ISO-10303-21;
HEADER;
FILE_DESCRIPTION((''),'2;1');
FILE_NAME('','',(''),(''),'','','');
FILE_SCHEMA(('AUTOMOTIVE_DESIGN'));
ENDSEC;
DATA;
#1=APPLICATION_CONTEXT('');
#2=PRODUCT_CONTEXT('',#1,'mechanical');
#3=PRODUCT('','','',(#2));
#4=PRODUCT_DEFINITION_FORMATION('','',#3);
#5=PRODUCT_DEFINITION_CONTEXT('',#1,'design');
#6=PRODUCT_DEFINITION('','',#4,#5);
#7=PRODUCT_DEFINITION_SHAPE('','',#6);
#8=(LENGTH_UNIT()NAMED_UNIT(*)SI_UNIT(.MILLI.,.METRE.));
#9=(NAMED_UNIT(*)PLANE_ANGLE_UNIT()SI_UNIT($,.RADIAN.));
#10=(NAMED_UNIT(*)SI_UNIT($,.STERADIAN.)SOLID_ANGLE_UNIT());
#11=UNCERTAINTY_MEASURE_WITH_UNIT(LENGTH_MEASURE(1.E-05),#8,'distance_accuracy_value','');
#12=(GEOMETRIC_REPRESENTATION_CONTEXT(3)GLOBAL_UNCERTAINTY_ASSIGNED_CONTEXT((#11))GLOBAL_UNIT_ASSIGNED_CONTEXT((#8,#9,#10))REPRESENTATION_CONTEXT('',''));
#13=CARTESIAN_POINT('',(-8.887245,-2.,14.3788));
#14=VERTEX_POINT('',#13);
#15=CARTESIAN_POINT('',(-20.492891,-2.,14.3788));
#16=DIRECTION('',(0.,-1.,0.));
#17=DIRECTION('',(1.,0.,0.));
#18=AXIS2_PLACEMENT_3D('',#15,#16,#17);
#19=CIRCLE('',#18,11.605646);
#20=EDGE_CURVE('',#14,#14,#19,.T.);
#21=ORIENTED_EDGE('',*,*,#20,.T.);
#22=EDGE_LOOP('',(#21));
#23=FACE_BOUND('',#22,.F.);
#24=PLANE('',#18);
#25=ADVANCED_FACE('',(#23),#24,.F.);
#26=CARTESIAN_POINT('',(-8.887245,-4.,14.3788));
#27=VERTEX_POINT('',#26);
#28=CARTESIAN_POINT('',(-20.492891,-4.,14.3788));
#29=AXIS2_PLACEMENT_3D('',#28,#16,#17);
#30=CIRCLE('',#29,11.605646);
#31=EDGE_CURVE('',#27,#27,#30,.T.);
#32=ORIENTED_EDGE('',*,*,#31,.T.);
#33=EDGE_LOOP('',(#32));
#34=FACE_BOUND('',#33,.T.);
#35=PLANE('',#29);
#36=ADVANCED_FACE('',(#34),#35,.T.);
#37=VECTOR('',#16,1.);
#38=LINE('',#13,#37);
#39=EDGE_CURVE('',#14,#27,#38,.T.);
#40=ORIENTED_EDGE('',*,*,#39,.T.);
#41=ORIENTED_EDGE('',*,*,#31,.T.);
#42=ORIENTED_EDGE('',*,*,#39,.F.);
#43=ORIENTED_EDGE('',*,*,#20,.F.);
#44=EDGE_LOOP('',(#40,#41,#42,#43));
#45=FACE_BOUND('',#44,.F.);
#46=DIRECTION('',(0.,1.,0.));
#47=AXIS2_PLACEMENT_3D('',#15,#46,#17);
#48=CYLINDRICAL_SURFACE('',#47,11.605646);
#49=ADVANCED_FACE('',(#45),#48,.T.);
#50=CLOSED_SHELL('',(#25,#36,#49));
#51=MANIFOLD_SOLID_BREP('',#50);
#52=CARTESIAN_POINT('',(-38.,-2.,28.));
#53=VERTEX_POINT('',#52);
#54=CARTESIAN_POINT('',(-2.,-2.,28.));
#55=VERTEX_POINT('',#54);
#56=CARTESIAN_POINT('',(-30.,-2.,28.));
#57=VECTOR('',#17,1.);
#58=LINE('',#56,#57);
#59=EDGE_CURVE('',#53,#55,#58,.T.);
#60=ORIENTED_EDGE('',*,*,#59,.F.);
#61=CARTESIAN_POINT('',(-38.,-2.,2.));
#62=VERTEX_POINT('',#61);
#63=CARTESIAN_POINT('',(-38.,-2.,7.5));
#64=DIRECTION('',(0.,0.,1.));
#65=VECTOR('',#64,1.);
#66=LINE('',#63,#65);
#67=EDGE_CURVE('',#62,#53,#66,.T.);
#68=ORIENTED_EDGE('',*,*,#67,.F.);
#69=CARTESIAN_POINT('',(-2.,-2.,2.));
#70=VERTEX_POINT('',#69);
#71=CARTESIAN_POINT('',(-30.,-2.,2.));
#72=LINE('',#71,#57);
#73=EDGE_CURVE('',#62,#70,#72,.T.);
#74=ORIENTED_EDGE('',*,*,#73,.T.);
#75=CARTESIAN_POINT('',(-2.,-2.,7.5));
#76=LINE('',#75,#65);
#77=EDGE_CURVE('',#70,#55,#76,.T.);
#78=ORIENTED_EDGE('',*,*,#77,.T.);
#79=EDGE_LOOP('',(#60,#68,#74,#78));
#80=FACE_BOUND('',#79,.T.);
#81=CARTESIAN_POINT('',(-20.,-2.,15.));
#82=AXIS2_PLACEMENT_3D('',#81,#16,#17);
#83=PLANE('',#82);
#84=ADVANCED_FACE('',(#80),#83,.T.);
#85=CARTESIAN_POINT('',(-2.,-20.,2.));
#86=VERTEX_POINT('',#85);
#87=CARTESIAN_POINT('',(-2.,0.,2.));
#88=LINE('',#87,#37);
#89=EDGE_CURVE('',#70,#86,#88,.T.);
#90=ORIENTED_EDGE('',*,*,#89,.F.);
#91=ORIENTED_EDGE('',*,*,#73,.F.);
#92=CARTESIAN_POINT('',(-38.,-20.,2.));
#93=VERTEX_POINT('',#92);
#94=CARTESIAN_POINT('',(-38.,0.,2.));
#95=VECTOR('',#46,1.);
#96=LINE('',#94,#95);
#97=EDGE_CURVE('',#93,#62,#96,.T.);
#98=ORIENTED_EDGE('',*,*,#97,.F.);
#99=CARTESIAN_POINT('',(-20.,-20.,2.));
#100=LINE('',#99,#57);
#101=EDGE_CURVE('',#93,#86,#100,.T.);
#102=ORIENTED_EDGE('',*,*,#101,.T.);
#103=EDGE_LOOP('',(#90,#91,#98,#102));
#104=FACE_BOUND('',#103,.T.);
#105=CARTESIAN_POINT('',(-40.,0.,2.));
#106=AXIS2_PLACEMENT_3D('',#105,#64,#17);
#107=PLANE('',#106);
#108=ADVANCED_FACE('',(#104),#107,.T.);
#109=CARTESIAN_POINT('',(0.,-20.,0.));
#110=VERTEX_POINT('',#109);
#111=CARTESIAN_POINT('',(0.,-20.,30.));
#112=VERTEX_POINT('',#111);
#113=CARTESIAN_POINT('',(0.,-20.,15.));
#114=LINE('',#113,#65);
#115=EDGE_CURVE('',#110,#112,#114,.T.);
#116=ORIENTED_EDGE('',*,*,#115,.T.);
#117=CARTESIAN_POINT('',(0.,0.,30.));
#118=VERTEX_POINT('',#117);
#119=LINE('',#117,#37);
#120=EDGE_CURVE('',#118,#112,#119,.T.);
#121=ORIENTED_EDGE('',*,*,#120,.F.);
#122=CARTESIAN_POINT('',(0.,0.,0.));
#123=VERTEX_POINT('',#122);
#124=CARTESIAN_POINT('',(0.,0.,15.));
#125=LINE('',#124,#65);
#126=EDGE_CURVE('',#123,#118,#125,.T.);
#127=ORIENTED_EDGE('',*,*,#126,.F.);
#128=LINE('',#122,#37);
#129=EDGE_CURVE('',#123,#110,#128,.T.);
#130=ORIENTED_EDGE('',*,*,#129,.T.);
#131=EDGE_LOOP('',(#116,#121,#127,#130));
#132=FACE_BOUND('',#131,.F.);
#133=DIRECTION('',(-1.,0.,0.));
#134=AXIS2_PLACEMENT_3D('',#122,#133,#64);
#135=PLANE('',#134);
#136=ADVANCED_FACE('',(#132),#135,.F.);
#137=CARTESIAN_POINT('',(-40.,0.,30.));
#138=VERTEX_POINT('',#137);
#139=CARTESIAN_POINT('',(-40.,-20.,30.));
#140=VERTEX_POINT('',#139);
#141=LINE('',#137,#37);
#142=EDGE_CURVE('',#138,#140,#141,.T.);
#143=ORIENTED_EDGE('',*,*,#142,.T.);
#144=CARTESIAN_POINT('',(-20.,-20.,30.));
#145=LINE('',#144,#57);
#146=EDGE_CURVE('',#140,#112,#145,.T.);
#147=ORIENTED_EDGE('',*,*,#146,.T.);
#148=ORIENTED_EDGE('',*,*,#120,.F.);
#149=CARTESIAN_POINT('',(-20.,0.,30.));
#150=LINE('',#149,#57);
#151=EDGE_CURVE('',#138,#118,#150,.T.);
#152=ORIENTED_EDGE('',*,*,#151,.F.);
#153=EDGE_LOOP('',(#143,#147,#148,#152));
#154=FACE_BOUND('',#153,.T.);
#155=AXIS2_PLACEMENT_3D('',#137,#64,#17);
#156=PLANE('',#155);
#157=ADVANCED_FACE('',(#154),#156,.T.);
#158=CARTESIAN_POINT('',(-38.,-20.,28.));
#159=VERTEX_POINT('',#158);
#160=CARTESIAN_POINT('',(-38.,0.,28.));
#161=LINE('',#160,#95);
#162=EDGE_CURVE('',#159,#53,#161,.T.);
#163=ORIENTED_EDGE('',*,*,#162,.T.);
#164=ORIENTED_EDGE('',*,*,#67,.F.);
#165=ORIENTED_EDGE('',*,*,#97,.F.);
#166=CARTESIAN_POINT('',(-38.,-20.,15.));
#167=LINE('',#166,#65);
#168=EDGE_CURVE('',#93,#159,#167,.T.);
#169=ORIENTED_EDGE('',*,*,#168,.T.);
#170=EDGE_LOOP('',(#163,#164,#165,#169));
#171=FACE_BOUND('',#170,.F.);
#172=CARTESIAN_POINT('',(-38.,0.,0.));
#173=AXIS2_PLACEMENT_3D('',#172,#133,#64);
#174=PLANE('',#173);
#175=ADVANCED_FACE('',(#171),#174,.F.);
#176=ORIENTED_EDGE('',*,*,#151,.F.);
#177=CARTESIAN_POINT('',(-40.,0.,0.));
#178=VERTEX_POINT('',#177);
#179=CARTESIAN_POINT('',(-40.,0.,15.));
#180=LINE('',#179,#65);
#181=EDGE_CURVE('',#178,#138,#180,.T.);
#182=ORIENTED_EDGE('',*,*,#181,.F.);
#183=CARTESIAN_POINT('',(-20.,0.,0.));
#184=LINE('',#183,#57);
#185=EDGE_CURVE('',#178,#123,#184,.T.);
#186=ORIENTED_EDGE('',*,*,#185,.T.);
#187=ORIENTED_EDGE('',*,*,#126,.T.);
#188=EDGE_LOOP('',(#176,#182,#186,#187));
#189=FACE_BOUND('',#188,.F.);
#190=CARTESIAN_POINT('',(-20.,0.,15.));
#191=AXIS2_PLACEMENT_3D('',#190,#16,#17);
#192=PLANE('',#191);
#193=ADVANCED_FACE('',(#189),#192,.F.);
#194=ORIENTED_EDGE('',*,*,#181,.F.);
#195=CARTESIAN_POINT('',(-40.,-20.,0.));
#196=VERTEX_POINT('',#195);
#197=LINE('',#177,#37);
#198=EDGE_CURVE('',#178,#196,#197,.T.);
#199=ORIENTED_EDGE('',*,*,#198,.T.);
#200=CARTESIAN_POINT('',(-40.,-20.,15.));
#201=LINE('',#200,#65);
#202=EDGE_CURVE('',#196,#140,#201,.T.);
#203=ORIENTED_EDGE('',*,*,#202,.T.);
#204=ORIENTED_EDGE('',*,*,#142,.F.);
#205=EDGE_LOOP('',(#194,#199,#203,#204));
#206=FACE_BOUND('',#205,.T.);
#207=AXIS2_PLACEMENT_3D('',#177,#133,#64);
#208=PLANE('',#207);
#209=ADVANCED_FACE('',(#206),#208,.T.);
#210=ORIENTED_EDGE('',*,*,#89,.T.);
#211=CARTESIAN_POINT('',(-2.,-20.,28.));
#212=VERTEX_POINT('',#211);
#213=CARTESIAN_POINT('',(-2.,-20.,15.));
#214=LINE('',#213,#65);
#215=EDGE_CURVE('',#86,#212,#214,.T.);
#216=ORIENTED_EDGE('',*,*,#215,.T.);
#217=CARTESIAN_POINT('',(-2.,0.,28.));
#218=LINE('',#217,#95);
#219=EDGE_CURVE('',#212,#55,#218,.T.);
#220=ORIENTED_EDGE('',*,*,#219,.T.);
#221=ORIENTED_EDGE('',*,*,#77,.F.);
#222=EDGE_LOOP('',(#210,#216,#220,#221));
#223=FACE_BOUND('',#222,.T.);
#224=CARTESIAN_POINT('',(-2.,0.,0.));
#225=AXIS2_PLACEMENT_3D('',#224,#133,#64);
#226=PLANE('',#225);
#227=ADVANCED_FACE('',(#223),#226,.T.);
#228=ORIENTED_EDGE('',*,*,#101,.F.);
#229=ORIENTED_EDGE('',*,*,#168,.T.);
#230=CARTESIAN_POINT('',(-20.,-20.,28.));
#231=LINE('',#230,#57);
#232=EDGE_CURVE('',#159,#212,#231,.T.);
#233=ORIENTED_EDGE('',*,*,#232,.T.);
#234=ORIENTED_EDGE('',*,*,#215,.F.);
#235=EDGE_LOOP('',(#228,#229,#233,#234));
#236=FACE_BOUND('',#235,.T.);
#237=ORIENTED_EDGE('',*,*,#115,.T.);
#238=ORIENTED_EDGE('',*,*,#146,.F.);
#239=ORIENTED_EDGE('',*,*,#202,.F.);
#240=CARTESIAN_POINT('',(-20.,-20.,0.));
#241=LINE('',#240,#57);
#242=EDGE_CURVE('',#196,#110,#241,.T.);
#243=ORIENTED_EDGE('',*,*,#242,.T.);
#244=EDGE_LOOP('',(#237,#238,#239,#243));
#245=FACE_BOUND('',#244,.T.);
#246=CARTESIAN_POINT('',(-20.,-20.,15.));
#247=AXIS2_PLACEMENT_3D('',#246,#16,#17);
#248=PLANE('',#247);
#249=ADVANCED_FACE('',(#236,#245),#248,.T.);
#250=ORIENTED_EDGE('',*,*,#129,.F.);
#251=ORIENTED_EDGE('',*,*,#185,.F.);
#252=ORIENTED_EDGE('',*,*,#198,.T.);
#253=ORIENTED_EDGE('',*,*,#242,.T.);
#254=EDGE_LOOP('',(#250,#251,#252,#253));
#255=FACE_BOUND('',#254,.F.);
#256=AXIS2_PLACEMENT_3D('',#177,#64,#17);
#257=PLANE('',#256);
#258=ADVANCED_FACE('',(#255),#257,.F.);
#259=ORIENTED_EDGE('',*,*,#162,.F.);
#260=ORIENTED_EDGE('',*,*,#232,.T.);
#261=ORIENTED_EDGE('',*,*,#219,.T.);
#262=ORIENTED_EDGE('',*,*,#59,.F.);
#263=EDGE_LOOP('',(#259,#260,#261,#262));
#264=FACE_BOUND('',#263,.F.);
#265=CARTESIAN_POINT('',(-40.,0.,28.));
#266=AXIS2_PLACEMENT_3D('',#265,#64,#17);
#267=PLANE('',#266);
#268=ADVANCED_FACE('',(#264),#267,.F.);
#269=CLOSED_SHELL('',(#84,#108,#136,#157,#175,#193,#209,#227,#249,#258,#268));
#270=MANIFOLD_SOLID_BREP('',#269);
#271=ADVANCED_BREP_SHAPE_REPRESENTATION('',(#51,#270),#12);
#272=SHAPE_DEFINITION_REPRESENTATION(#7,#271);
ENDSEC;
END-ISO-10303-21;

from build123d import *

# Parameters (mm, degrees)
F0_W     = 40
F0_H     = 30
F1_DEPTH = 20
F2_T     = -2
F3_R     = 11.6056457338
F4_DEPTH = 2


# Not quite as in the source:
# - the program builds the solid bodies; features that only make, move or delete a surface that nothing else refers to are left out


with BuildPart() as f1:
    # F0 (on Front) → F1 (new body)
    with BuildSketch(Plane.XZ):
        with Locations((-20, 15)):
            Rectangle(F0_W, F0_H)
    extrude(amount=F1_DEPTH)

    # F2
    f2_openings = [f1.faces().sort_by_distance(p)[0] for p in [
        (-20, -20, 15),
    ]]
    offset(amount=F2_T, openings=f2_openings)


with BuildPart() as f4:
    # F3 (on face) → F4 (new body)
    with BuildSketch(Plane.XZ.offset(2)):
        with Locations((-20.4928908497, 14.3788000569)):
            Circle(F3_R)
    extrude(amount=F4_DEPTH)


solid = Compound([f1.part, f4.part])
